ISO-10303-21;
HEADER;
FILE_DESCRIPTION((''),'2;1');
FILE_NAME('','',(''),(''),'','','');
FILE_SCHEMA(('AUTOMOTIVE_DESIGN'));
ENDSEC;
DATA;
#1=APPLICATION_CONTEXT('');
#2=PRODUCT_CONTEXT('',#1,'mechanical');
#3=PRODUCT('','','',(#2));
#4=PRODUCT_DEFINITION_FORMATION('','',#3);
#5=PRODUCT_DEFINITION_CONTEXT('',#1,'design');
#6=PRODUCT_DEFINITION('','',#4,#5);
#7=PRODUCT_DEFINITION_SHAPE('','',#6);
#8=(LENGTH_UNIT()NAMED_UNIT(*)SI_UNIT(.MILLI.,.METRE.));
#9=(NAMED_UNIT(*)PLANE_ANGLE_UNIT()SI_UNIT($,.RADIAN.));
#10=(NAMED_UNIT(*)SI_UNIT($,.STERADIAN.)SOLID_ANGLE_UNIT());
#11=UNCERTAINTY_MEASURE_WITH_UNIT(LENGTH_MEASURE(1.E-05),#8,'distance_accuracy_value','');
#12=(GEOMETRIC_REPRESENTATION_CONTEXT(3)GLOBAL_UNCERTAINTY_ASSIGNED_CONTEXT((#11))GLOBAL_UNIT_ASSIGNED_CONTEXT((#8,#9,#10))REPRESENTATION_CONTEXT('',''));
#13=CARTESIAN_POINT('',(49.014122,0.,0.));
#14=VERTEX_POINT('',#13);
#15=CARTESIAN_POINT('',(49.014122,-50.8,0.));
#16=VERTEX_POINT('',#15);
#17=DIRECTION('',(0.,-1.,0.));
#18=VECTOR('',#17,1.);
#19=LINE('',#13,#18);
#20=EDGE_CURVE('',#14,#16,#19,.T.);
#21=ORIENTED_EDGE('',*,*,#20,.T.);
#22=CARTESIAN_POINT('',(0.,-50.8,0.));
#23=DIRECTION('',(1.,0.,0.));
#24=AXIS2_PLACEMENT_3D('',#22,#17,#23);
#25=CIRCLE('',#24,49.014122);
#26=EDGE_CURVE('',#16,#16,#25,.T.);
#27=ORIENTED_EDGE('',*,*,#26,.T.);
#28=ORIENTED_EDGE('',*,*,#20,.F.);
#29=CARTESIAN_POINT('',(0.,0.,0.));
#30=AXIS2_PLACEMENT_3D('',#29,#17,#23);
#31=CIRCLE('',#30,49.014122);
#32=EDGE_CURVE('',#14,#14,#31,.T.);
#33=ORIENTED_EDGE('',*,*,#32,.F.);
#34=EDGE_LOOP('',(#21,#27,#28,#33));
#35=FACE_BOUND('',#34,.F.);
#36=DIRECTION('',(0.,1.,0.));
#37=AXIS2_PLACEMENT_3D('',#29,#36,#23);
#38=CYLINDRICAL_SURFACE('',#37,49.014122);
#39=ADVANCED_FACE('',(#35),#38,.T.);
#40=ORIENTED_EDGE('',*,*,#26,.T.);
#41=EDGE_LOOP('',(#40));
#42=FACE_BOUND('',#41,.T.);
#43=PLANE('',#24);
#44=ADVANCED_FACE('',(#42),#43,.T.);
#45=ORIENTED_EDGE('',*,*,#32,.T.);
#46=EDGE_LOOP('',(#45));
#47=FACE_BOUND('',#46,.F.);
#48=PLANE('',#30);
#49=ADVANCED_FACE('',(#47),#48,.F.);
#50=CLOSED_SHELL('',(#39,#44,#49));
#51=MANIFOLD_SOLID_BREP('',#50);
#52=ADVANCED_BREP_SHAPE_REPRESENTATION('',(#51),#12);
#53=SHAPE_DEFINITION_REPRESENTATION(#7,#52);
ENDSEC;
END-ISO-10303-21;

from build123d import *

# Parameters (mm, degrees)
F0_R     = 128.8146505864
F1_DEPTH = 25.4
F3_R     = 49.0141215923
F4_DEPTH = 50.8


# Not quite as in the source:
# - the program builds the solid bodies; features that only make, move or delete a surface that nothing else refers to are left out


with BuildPart() as f1:
    # F0 (on Front) → F1 (new body)
    with BuildSketch(Plane.XZ):
        with Locations((10.3380498641, 23.791786507)):
            Circle(F0_R)
        with BuildLine():
            ThreePointArc((48.5750728322, 28.0582736708), (55.5999914747, 14.8036448721), (58.026257129, 0))
            ThreePointArc((58.026257129, 0), (42.1859059552, -34.9036707218), (5.4861297438, -45.9630279004))
            ThreePointArc((5.4861297438, -45.9630279004), (-66.466433543, -36.001514495), (-48.743487455, 34.4420820545))
            ThreePointArc((-48.743487455, 34.4420820545), (0.9542816207, 81.3053730097), (48.7808239875, 32.5338840485))
            ThreePointArc((48.7808239875, 32.5338840485), (48.7293590503, 30.2937154281), (48.5750728322, 28.0582736708))
        make_face(mode=Mode.SUBTRACT)
    extrude(amount=F1_DEPTH)


with BuildPart() as f4:
    # F3 (on Front) → F4 (new body)
    with BuildSketch(Plane.XZ):
        Circle(F3_R)
    extrude(amount=F4_DEPTH)


solid = f4.part
